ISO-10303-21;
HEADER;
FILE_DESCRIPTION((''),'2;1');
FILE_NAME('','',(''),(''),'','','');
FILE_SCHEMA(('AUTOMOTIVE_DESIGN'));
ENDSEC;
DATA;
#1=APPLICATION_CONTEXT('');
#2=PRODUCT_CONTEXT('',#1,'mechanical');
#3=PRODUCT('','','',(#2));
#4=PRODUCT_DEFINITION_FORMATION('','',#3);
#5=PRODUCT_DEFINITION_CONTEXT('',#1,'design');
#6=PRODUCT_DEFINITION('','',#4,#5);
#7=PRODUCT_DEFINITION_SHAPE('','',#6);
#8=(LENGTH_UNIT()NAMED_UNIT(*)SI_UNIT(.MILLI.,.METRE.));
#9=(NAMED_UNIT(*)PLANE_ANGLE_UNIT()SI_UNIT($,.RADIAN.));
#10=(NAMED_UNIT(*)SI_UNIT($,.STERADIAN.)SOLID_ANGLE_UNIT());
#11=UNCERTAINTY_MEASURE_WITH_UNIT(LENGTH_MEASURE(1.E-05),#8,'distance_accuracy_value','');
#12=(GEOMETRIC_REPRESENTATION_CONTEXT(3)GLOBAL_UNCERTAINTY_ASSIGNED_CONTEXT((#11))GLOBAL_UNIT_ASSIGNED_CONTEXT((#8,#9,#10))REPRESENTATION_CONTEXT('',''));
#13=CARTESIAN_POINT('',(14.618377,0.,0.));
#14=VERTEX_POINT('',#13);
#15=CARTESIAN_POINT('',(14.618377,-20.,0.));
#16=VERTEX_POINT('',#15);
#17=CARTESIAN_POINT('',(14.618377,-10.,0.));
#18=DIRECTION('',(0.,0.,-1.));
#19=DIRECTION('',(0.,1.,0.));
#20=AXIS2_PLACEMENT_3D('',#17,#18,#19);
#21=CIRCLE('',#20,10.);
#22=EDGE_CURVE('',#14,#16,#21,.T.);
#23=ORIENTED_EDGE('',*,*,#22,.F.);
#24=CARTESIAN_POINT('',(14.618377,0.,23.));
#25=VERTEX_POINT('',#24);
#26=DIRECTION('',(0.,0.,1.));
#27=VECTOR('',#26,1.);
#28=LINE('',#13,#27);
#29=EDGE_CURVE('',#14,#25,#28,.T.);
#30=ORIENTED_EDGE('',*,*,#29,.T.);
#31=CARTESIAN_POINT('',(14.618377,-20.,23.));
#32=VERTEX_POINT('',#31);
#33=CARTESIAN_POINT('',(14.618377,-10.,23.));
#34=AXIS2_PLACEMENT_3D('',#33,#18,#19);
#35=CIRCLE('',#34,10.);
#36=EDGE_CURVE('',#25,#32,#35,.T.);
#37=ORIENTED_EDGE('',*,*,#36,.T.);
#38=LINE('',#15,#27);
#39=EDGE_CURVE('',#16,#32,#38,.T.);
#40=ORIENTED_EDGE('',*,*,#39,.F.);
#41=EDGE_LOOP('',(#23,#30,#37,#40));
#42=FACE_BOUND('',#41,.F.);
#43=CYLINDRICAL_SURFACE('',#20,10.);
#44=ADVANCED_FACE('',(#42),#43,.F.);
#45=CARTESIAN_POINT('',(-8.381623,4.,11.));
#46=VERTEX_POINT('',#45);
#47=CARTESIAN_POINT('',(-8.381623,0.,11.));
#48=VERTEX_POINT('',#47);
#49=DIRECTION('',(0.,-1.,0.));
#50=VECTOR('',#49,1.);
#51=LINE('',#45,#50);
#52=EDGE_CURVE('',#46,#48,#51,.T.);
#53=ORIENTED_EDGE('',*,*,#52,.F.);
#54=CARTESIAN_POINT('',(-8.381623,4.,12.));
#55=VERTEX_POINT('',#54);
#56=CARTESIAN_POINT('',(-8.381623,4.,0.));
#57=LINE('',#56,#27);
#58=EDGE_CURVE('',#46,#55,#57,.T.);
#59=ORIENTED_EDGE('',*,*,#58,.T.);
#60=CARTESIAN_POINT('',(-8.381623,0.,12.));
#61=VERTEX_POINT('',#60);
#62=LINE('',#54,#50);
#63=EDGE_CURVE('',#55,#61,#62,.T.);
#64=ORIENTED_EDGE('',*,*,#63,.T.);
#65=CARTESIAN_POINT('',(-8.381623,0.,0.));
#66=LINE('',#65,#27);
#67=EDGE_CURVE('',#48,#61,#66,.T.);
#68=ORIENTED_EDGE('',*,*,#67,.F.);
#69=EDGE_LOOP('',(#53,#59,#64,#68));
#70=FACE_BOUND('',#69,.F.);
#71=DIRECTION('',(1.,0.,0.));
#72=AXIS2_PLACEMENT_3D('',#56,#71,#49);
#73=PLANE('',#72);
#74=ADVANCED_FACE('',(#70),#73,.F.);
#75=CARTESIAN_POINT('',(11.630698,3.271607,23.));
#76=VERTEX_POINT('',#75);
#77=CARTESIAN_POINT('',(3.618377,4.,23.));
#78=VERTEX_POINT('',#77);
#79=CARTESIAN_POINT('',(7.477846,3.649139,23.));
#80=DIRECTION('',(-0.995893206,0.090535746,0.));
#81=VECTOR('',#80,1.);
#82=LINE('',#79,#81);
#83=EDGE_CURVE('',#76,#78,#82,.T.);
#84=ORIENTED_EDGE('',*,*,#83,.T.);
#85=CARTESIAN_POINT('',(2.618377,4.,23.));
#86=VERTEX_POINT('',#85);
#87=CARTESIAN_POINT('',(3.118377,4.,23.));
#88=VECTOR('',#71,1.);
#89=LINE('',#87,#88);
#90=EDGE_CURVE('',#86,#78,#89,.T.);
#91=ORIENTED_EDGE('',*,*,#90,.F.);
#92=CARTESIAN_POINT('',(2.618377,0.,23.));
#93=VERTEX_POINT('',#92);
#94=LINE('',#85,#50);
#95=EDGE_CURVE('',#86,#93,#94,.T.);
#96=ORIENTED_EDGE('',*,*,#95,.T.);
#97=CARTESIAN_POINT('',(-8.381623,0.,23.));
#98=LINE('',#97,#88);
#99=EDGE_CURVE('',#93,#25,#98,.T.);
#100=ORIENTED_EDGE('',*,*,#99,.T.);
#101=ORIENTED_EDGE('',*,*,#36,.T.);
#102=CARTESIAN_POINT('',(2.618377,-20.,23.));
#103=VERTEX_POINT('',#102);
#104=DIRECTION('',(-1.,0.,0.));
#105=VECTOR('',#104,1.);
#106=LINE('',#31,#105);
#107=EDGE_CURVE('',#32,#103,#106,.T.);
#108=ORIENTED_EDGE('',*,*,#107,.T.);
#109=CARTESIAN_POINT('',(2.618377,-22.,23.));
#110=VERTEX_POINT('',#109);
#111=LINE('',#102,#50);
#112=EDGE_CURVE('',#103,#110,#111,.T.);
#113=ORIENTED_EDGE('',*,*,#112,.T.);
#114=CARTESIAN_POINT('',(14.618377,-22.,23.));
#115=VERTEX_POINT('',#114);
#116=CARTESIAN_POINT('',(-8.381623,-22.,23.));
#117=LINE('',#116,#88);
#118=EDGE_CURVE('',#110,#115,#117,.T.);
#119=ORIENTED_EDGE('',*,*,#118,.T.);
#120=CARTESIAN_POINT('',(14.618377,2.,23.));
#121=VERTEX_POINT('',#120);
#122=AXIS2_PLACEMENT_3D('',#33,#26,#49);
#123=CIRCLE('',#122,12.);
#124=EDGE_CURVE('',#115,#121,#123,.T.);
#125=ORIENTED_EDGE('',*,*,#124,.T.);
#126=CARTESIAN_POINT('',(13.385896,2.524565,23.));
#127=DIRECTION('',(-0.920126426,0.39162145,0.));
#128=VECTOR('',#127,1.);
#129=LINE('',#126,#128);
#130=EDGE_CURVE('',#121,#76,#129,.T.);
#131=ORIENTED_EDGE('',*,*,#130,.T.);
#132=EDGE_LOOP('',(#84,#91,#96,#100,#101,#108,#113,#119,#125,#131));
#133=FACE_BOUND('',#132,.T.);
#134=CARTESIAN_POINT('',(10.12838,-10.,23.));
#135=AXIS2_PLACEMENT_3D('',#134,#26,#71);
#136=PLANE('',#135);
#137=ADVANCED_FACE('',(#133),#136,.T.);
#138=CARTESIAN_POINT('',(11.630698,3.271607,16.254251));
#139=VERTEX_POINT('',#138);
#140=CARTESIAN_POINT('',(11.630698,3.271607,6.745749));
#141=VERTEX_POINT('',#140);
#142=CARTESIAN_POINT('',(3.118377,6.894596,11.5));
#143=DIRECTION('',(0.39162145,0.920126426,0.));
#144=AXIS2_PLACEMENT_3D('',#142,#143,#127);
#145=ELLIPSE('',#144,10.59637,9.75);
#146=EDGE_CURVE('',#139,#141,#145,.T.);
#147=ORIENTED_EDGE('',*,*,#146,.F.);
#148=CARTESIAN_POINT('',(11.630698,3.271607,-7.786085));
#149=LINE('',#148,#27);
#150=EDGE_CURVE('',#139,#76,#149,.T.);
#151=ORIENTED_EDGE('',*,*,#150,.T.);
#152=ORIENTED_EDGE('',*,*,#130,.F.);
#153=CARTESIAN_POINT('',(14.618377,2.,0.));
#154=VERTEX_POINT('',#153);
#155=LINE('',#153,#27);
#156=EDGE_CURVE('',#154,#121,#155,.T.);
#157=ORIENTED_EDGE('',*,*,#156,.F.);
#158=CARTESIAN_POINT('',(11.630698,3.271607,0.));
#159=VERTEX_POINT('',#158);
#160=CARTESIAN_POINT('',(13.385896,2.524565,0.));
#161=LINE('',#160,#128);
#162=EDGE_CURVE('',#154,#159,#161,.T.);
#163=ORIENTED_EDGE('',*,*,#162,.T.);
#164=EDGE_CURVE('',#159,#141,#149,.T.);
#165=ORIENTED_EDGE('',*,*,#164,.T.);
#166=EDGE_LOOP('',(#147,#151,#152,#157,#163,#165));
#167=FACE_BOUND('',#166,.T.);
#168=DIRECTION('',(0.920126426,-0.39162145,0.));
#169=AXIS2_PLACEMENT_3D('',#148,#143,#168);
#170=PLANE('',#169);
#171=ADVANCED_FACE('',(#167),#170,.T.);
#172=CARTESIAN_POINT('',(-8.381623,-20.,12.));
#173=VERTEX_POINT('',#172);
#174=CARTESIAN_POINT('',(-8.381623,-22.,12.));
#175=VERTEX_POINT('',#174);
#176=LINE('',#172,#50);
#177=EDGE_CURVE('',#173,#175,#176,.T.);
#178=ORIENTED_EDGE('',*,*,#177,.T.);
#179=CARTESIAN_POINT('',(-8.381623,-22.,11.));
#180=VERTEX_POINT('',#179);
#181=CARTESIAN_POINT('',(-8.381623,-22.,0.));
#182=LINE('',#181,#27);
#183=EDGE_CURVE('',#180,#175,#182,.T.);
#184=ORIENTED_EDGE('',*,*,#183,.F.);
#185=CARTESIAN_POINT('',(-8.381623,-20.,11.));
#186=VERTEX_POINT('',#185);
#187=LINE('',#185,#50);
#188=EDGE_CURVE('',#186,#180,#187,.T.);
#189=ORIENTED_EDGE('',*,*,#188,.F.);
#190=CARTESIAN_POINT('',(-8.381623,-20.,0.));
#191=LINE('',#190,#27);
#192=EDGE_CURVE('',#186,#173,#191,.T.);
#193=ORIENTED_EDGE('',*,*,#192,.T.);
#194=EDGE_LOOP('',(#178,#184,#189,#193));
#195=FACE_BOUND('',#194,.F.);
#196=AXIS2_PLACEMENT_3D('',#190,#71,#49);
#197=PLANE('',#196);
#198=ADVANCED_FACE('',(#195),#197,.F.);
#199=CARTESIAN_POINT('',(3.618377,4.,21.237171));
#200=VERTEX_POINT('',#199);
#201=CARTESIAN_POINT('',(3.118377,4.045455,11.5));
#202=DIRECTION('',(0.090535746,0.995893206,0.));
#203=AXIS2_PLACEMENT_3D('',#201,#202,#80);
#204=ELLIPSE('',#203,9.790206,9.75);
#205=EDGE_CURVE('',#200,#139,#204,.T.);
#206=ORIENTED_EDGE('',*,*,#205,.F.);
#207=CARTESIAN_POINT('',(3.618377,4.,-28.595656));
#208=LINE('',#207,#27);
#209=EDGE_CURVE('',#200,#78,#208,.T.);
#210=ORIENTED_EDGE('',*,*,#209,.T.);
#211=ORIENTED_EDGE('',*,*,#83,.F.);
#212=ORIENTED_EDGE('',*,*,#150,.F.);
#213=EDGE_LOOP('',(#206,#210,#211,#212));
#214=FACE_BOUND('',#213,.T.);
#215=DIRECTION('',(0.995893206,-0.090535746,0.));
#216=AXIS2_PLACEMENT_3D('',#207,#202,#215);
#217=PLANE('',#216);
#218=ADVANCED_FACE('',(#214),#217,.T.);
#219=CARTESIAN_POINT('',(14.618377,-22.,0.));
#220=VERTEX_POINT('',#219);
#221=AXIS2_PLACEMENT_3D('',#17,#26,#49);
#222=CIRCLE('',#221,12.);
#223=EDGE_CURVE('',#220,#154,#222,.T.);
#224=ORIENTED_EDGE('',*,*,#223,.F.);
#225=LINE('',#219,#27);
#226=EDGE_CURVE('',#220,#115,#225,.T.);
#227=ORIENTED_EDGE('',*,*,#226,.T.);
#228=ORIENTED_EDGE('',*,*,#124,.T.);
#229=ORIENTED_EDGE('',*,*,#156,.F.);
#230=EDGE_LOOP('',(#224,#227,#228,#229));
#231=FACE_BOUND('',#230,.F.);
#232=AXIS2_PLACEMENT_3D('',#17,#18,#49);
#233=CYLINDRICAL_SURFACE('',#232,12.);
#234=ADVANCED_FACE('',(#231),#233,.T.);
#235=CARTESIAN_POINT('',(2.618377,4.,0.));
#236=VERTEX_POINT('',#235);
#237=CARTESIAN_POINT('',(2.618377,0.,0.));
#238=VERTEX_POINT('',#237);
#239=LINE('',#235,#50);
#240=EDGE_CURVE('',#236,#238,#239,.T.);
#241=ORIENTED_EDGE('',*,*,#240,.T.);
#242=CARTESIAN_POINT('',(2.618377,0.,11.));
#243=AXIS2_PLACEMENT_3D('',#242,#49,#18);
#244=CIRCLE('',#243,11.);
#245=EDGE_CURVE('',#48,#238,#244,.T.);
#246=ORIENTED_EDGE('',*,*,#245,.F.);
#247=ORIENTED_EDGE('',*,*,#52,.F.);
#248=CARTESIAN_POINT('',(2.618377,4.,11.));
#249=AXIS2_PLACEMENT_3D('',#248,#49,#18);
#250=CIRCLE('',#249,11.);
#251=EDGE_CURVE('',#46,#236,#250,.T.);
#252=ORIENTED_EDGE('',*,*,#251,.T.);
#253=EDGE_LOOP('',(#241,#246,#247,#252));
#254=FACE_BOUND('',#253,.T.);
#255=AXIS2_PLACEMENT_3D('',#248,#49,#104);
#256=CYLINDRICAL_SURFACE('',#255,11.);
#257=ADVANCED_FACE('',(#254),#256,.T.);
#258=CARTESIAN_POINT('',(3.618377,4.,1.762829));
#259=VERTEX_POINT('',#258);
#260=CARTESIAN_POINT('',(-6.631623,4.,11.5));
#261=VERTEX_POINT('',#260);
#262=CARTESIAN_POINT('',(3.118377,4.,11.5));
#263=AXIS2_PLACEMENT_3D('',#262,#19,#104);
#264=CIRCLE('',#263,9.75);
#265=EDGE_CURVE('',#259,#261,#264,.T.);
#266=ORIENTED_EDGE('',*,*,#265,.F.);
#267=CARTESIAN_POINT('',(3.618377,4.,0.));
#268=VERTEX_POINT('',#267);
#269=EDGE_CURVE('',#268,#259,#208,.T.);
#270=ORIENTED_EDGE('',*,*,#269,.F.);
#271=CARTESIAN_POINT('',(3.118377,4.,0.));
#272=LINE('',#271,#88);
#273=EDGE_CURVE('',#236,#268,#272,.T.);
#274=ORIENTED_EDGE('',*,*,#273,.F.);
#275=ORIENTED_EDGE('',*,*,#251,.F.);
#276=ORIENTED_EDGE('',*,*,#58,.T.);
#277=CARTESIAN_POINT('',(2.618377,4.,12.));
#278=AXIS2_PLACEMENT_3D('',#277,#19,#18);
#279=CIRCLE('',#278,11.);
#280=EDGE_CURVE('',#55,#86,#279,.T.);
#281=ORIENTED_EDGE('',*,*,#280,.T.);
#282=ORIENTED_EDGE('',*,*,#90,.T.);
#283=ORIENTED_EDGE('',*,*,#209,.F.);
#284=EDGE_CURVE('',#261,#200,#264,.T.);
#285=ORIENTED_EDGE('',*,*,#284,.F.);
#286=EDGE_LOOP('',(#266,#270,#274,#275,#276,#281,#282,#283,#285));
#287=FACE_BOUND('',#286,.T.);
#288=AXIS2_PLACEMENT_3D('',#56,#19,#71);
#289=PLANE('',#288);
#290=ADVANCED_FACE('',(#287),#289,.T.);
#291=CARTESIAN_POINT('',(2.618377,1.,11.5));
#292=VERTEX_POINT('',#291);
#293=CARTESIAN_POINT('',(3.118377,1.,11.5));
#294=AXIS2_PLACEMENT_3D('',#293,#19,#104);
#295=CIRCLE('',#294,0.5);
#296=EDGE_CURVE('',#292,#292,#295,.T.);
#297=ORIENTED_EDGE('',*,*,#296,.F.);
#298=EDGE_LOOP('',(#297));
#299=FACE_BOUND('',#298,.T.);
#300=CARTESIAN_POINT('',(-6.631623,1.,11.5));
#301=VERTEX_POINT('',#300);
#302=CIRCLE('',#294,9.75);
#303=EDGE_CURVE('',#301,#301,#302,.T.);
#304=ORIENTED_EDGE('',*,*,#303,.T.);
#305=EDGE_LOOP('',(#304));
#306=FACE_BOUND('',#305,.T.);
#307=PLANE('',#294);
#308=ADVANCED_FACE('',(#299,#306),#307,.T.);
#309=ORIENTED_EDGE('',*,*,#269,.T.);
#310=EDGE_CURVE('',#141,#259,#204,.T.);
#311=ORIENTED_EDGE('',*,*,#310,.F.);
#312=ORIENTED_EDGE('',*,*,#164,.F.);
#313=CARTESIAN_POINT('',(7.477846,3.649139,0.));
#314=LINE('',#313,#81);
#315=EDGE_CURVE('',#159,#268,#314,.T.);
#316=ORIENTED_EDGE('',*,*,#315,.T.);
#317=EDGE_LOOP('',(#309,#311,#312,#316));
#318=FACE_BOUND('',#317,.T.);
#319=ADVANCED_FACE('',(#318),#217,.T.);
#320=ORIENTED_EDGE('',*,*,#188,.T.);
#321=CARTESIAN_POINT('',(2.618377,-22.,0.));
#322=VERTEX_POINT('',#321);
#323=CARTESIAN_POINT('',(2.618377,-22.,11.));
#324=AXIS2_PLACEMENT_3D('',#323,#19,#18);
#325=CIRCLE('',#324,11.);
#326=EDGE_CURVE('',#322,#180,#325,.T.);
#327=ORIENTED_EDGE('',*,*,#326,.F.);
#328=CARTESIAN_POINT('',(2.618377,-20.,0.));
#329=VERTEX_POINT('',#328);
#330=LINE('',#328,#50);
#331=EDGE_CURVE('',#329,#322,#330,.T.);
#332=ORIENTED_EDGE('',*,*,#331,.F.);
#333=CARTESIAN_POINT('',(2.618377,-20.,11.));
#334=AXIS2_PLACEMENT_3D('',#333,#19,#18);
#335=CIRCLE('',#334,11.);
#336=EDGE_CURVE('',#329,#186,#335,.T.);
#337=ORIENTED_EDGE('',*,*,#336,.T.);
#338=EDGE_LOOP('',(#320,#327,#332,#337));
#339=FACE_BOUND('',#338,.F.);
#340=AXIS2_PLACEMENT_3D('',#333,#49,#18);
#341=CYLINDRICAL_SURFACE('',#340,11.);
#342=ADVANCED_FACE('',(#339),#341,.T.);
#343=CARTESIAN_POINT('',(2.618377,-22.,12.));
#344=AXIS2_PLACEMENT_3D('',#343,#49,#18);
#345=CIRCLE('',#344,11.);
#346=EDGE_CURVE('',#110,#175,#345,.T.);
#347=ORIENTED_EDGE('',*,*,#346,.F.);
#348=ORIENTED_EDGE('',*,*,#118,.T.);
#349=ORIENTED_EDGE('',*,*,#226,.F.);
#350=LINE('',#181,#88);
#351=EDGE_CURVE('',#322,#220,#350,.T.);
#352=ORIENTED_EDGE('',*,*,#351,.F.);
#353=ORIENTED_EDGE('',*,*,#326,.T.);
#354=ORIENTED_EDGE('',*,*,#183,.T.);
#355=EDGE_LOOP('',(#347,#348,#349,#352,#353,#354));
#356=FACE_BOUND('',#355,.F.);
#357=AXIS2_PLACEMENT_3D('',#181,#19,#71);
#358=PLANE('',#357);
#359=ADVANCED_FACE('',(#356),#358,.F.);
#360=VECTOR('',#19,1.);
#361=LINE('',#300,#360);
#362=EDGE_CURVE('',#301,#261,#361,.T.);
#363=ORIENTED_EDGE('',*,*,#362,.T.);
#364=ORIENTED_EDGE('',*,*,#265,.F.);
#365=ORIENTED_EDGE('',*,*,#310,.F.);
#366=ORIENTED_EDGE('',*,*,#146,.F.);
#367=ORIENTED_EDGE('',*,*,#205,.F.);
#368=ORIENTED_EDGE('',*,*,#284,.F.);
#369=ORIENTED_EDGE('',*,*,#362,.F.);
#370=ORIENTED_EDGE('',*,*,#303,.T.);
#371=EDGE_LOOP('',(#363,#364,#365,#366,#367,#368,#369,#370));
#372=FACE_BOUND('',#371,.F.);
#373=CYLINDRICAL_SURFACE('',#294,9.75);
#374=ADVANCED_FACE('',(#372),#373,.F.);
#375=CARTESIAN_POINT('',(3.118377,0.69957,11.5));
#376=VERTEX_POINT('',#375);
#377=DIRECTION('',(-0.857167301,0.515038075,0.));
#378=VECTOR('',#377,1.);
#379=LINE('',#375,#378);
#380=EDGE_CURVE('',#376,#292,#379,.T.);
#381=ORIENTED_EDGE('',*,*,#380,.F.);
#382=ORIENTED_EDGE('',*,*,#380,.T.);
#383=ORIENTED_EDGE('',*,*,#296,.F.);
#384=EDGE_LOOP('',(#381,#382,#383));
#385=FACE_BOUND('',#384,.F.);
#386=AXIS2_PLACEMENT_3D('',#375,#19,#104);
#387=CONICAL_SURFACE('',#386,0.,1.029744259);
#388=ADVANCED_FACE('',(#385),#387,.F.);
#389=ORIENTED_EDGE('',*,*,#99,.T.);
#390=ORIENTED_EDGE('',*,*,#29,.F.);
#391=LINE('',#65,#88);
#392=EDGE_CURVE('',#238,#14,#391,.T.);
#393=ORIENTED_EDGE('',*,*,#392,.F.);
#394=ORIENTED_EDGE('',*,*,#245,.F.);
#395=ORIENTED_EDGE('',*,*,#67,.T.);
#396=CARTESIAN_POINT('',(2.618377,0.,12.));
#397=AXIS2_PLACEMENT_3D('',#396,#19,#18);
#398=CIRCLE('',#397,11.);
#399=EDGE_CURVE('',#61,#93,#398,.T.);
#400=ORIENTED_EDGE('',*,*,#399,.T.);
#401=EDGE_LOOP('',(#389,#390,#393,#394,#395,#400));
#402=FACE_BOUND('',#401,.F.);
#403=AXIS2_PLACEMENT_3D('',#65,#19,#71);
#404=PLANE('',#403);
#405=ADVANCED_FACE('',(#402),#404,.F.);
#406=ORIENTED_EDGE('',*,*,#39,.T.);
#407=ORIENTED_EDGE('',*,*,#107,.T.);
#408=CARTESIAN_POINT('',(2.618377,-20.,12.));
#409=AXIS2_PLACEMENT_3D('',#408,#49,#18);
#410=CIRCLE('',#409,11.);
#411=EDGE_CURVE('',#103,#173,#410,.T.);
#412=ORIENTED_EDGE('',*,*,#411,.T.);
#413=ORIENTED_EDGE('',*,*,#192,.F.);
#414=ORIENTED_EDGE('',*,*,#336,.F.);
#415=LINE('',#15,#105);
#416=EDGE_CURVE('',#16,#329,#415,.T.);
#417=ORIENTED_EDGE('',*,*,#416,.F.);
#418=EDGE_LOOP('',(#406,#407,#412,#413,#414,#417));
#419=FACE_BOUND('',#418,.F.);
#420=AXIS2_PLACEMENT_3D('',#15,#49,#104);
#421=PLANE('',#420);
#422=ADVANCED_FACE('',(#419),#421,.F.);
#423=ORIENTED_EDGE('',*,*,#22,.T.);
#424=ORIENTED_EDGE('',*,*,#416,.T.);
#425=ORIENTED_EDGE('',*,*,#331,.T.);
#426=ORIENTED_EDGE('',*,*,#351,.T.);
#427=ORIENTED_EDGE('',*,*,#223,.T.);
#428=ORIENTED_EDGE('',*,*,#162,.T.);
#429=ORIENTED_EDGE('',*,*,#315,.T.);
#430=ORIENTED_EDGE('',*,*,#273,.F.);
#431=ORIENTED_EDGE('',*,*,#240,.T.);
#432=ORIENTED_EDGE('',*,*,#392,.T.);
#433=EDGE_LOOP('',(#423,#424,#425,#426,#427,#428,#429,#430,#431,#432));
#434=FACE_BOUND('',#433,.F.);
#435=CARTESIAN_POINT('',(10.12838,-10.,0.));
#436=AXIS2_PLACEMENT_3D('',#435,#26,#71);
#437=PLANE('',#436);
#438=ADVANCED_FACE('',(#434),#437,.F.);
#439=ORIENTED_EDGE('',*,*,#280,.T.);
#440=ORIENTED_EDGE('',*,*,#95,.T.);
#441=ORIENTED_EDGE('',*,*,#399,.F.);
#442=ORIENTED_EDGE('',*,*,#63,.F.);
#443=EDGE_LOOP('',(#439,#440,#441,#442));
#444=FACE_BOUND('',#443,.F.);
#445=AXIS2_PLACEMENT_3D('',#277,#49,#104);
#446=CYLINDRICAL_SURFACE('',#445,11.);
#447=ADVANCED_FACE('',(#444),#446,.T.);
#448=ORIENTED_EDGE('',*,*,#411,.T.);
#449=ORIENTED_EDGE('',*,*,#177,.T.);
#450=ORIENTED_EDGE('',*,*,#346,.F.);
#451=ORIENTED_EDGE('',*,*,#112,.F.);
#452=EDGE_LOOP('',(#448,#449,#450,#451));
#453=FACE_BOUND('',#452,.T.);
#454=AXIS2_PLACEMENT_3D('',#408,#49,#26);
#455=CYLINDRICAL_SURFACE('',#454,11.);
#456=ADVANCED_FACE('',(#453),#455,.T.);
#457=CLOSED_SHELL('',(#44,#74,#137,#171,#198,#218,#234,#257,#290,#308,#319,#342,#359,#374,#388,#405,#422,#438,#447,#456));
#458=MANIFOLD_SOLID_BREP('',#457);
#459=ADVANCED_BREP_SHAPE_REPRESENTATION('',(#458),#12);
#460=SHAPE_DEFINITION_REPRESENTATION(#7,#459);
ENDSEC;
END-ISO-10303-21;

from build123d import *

# Parameters (mm, degrees)
F0_W           = 23
F0_H           = 2
F1_DEPTH       = 23
F3_D           = 1
F3_DEPTH       = 3
F3_CBORE_D     = 19.5
F3_CBORE_DEPTH = 3
F3_TIP         = 0.3004303095
F4_R           = 11
F5_T1_DEPTH    = 80.1913118923
F6_T4_DEPTH    = 38.5721694425
F6_S5_R        = 12
F6_T6_DEPTH    = 21


# Not quite as in the source:
# - a fillet or chamfer that OpenCascade refuses, or shapes differently, is made with other operations: its cross-section is extruded or revolved along the edge and cut away or added


with BuildPart() as f1:
    # F0 (on Top) → F1 (new body)
    with BuildSketch(Plane.XY):
        with BuildLine():
            Line((-8.3816226795, 2), (-8.3816226795, 0))
            Line((-8.3816226795, 0), (14.6183773205, 0))
            ThreePointArc((14.6183773205, 0), (24.6183773205, -10), (14.6183773205, -20))
            Line((14.6183773205, -20), (-8.3816226795, -20))
            Line((-8.3816226795, -20), (-8.3816226795, -22))
            Line((-8.3816226795, -22), (14.6183773205, -22))
            ThreePointArc((14.6183773205, -22), (26.6183773205, -10), (14.6183773205, 2))
            Line((14.6183773205, 2), (-8.3816226795, 2))
        make_face()
        with Locations((3.1183773205, 3)):
            Rectangle(F0_W, F0_H)
    extrude(amount=F1_DEPTH)

    # F3
    with Locations(Plane(origin=(0, 4, 0), x_dir=(-1, 0, 0), z_dir=(0, 1, 0))):
        with Locations((-3.1183773205, 11.5)):
            CounterBoreHole(F3_D / 2, F3_CBORE_D / 2, F3_CBORE_DEPTH, depth=F3_DEPTH)
            with Locations((0, 0, -(F3_DEPTH + F3_TIP / 2))):  # 118° drill point
                Cone(0, F3_D / 2, F3_TIP, mode=Mode.SUBTRACT)

    # F4
    f4_edges = [f1.edges().sort_by_distance(p)[0] for p in [
        (-8.381623, 2, 23),
        (-8.381623, 2, 0),
        (-8.381623, -21, 0),
        (-8.381623, -21, 23),
    ]]
    fillet(f4_edges, radius=F4_R)

    # F5: chamfer of 11 x 1 on 1 edges, made by hand

    # F5_s2 → F5_t1 (cut)
    with BuildSketch(Plane.XY.offset(-28.5956559462)):
        Polygon((3.6183773205, 4), (14.6183773205, 3), (14.6183773205, 4), align=None)
    extrude(amount=F5_T1_DEPTH, mode=Mode.SUBTRACT)

    # F6: chamfer of 1 x 3 on 1 edges, made by hand


with BuildPart() as f6_tool2:
    # F6_s3 → F6_t4 (new body)
    with BuildSketch(Plane.XY.offset(-7.7860847213)):
        Polygon((11.6306977011, 3.2716072381), (14.6183773205, 2), (14.6183773205, 3), align=None)
    extrude(amount=F6_T4_DEPTH)

    # F6_s5 → F6_t6 (cut, symmetric)
    with BuildSketch(Plane.XY.offset(11.5)):
        with Locations((14.6183773205, -10)):
            Circle(F6_S5_R)
    extrude(amount=F6_T6_DEPTH, both=True, mode=Mode.SUBTRACT)


with BuildPart() as f1_1:
    add(f1.part)

    # F6_t1: cut F6_tool2
    add(f6_tool2.part, mode=Mode.SUBTRACT)


solid = f1_1.part
